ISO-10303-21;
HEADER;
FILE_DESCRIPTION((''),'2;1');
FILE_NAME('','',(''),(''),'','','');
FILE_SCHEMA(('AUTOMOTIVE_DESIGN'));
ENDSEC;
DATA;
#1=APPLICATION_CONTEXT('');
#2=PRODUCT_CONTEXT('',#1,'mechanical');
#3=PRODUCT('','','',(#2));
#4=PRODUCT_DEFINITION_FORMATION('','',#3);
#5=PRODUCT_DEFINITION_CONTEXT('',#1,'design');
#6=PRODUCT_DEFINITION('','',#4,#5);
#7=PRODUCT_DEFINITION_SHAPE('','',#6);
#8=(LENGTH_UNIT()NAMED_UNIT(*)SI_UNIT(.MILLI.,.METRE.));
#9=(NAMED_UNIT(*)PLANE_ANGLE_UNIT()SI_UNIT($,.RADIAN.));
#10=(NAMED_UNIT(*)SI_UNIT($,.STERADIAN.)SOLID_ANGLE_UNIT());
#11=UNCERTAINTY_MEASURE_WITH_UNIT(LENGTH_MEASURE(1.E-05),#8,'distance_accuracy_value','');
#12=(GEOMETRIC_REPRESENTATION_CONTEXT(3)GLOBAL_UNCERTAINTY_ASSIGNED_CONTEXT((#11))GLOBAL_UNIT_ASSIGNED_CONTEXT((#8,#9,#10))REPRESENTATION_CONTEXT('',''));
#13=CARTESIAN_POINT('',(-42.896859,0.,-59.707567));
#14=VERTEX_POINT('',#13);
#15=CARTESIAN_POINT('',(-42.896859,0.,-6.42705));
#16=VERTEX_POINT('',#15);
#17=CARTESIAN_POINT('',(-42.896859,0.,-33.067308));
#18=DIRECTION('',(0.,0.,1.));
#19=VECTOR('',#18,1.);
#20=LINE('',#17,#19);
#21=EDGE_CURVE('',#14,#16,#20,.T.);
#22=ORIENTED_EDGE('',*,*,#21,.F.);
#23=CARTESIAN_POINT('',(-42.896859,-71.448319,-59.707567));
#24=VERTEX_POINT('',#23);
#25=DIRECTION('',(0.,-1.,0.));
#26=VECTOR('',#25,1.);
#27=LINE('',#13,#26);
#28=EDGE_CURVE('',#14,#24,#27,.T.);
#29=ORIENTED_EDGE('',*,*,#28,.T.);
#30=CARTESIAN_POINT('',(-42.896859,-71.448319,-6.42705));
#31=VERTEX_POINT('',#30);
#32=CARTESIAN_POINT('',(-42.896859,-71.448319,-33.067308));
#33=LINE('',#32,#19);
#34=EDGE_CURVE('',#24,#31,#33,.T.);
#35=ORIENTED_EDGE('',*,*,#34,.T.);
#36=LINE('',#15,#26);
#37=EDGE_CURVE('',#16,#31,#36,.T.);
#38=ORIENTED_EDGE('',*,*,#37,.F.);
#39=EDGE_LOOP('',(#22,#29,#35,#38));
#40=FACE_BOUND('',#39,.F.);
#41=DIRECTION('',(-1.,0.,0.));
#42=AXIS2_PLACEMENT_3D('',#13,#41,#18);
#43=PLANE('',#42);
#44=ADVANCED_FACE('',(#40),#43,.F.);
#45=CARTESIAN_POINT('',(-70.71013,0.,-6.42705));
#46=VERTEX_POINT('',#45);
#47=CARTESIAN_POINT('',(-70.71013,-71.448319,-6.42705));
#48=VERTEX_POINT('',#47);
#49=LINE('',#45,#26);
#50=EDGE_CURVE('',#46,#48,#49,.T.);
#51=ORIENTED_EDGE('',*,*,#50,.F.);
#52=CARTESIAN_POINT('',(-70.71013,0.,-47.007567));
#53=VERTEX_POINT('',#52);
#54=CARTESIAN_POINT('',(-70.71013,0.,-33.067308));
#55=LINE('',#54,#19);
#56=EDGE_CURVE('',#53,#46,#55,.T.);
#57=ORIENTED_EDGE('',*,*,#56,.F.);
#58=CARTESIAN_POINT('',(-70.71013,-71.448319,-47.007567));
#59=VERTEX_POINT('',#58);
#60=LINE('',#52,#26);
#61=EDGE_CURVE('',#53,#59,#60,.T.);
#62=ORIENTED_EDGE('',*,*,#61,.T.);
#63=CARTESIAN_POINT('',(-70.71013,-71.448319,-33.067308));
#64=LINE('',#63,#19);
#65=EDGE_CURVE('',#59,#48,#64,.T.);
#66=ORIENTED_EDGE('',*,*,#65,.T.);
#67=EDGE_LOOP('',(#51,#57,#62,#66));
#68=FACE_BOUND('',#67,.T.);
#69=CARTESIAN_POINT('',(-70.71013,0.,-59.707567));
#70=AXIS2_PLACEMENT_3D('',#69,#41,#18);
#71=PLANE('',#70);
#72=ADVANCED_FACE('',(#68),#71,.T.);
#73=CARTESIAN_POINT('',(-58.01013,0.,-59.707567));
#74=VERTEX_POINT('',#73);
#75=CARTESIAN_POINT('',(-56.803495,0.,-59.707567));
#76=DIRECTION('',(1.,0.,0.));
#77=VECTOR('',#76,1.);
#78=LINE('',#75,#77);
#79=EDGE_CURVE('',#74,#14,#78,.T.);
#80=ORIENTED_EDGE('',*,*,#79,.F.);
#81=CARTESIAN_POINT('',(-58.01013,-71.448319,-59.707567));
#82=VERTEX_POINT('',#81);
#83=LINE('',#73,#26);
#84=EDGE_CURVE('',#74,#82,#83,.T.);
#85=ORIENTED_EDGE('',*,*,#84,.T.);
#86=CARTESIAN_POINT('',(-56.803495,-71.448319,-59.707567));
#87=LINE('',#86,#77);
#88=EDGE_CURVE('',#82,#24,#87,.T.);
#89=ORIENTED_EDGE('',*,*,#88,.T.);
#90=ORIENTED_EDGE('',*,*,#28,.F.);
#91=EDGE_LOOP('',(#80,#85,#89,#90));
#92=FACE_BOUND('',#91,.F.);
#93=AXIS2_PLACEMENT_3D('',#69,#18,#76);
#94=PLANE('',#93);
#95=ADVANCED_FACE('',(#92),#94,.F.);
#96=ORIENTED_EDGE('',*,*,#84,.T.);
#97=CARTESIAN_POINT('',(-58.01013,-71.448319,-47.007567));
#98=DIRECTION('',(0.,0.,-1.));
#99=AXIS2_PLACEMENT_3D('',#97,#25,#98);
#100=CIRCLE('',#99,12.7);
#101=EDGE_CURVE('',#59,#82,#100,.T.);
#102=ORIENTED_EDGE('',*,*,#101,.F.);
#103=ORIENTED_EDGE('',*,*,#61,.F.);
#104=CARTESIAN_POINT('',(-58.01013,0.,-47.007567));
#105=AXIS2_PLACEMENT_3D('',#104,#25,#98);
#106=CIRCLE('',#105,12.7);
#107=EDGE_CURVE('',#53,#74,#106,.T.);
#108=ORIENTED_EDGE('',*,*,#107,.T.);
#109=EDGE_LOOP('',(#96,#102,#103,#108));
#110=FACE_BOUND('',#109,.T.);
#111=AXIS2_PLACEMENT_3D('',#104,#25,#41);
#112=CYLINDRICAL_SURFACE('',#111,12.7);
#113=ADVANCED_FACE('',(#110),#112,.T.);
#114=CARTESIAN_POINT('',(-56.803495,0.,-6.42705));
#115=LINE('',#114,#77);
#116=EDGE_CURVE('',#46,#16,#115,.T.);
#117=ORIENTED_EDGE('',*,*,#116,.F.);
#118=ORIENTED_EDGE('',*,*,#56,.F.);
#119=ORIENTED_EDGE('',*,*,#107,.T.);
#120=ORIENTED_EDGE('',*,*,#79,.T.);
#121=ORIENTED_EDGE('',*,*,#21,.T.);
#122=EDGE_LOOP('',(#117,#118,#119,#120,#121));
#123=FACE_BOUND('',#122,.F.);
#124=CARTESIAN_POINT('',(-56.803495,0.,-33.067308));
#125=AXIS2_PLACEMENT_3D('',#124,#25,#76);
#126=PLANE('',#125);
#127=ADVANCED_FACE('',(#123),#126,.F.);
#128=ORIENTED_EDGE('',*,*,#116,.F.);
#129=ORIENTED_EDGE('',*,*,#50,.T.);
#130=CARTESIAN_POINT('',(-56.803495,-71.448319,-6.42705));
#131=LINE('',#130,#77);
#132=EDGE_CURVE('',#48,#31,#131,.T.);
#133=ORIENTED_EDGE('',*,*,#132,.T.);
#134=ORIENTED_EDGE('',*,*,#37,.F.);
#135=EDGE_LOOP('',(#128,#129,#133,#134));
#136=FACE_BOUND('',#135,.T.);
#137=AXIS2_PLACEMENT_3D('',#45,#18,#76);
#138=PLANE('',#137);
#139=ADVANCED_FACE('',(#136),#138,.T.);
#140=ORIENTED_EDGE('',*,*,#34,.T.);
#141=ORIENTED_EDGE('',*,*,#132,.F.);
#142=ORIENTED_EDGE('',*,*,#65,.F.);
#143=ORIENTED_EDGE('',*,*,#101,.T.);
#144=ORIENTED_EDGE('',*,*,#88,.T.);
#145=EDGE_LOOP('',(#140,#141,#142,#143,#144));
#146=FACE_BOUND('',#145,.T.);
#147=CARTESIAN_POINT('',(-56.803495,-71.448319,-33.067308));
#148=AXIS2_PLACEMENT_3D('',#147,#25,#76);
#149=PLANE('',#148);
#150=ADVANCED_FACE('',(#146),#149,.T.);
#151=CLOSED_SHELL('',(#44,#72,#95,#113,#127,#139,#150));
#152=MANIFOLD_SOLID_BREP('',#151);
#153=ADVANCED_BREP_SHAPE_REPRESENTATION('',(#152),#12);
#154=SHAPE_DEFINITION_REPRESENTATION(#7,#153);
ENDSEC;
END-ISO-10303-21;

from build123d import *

# Parameters (mm, degrees)
F0_W     = 27.8132706881
F0_H     = 53.2805174589
F1_DEPTH = 71.4483186603
F2_R     = 12.7


# Not quite as in the source:
# - the program builds the solid bodies; features that only make, move or delete a surface that nothing else refers to are left out


with BuildPart() as f1:
    # F0 (on Front) → F1 (new body)
    with BuildSketch(Plane.XZ):
        with Locations((-56.8034946918, -33.0673083663)):
            Rectangle(F0_W, F0_H)
    extrude(amount=F1_DEPTH)

    # F2
    f2_edges = [f1.edges().sort_by_distance(p)[0] for p in [
        (-70.71013, -35.724159, -59.707567),
    ]]
    fillet(f2_edges, radius=F2_R)


solid = f1.part
